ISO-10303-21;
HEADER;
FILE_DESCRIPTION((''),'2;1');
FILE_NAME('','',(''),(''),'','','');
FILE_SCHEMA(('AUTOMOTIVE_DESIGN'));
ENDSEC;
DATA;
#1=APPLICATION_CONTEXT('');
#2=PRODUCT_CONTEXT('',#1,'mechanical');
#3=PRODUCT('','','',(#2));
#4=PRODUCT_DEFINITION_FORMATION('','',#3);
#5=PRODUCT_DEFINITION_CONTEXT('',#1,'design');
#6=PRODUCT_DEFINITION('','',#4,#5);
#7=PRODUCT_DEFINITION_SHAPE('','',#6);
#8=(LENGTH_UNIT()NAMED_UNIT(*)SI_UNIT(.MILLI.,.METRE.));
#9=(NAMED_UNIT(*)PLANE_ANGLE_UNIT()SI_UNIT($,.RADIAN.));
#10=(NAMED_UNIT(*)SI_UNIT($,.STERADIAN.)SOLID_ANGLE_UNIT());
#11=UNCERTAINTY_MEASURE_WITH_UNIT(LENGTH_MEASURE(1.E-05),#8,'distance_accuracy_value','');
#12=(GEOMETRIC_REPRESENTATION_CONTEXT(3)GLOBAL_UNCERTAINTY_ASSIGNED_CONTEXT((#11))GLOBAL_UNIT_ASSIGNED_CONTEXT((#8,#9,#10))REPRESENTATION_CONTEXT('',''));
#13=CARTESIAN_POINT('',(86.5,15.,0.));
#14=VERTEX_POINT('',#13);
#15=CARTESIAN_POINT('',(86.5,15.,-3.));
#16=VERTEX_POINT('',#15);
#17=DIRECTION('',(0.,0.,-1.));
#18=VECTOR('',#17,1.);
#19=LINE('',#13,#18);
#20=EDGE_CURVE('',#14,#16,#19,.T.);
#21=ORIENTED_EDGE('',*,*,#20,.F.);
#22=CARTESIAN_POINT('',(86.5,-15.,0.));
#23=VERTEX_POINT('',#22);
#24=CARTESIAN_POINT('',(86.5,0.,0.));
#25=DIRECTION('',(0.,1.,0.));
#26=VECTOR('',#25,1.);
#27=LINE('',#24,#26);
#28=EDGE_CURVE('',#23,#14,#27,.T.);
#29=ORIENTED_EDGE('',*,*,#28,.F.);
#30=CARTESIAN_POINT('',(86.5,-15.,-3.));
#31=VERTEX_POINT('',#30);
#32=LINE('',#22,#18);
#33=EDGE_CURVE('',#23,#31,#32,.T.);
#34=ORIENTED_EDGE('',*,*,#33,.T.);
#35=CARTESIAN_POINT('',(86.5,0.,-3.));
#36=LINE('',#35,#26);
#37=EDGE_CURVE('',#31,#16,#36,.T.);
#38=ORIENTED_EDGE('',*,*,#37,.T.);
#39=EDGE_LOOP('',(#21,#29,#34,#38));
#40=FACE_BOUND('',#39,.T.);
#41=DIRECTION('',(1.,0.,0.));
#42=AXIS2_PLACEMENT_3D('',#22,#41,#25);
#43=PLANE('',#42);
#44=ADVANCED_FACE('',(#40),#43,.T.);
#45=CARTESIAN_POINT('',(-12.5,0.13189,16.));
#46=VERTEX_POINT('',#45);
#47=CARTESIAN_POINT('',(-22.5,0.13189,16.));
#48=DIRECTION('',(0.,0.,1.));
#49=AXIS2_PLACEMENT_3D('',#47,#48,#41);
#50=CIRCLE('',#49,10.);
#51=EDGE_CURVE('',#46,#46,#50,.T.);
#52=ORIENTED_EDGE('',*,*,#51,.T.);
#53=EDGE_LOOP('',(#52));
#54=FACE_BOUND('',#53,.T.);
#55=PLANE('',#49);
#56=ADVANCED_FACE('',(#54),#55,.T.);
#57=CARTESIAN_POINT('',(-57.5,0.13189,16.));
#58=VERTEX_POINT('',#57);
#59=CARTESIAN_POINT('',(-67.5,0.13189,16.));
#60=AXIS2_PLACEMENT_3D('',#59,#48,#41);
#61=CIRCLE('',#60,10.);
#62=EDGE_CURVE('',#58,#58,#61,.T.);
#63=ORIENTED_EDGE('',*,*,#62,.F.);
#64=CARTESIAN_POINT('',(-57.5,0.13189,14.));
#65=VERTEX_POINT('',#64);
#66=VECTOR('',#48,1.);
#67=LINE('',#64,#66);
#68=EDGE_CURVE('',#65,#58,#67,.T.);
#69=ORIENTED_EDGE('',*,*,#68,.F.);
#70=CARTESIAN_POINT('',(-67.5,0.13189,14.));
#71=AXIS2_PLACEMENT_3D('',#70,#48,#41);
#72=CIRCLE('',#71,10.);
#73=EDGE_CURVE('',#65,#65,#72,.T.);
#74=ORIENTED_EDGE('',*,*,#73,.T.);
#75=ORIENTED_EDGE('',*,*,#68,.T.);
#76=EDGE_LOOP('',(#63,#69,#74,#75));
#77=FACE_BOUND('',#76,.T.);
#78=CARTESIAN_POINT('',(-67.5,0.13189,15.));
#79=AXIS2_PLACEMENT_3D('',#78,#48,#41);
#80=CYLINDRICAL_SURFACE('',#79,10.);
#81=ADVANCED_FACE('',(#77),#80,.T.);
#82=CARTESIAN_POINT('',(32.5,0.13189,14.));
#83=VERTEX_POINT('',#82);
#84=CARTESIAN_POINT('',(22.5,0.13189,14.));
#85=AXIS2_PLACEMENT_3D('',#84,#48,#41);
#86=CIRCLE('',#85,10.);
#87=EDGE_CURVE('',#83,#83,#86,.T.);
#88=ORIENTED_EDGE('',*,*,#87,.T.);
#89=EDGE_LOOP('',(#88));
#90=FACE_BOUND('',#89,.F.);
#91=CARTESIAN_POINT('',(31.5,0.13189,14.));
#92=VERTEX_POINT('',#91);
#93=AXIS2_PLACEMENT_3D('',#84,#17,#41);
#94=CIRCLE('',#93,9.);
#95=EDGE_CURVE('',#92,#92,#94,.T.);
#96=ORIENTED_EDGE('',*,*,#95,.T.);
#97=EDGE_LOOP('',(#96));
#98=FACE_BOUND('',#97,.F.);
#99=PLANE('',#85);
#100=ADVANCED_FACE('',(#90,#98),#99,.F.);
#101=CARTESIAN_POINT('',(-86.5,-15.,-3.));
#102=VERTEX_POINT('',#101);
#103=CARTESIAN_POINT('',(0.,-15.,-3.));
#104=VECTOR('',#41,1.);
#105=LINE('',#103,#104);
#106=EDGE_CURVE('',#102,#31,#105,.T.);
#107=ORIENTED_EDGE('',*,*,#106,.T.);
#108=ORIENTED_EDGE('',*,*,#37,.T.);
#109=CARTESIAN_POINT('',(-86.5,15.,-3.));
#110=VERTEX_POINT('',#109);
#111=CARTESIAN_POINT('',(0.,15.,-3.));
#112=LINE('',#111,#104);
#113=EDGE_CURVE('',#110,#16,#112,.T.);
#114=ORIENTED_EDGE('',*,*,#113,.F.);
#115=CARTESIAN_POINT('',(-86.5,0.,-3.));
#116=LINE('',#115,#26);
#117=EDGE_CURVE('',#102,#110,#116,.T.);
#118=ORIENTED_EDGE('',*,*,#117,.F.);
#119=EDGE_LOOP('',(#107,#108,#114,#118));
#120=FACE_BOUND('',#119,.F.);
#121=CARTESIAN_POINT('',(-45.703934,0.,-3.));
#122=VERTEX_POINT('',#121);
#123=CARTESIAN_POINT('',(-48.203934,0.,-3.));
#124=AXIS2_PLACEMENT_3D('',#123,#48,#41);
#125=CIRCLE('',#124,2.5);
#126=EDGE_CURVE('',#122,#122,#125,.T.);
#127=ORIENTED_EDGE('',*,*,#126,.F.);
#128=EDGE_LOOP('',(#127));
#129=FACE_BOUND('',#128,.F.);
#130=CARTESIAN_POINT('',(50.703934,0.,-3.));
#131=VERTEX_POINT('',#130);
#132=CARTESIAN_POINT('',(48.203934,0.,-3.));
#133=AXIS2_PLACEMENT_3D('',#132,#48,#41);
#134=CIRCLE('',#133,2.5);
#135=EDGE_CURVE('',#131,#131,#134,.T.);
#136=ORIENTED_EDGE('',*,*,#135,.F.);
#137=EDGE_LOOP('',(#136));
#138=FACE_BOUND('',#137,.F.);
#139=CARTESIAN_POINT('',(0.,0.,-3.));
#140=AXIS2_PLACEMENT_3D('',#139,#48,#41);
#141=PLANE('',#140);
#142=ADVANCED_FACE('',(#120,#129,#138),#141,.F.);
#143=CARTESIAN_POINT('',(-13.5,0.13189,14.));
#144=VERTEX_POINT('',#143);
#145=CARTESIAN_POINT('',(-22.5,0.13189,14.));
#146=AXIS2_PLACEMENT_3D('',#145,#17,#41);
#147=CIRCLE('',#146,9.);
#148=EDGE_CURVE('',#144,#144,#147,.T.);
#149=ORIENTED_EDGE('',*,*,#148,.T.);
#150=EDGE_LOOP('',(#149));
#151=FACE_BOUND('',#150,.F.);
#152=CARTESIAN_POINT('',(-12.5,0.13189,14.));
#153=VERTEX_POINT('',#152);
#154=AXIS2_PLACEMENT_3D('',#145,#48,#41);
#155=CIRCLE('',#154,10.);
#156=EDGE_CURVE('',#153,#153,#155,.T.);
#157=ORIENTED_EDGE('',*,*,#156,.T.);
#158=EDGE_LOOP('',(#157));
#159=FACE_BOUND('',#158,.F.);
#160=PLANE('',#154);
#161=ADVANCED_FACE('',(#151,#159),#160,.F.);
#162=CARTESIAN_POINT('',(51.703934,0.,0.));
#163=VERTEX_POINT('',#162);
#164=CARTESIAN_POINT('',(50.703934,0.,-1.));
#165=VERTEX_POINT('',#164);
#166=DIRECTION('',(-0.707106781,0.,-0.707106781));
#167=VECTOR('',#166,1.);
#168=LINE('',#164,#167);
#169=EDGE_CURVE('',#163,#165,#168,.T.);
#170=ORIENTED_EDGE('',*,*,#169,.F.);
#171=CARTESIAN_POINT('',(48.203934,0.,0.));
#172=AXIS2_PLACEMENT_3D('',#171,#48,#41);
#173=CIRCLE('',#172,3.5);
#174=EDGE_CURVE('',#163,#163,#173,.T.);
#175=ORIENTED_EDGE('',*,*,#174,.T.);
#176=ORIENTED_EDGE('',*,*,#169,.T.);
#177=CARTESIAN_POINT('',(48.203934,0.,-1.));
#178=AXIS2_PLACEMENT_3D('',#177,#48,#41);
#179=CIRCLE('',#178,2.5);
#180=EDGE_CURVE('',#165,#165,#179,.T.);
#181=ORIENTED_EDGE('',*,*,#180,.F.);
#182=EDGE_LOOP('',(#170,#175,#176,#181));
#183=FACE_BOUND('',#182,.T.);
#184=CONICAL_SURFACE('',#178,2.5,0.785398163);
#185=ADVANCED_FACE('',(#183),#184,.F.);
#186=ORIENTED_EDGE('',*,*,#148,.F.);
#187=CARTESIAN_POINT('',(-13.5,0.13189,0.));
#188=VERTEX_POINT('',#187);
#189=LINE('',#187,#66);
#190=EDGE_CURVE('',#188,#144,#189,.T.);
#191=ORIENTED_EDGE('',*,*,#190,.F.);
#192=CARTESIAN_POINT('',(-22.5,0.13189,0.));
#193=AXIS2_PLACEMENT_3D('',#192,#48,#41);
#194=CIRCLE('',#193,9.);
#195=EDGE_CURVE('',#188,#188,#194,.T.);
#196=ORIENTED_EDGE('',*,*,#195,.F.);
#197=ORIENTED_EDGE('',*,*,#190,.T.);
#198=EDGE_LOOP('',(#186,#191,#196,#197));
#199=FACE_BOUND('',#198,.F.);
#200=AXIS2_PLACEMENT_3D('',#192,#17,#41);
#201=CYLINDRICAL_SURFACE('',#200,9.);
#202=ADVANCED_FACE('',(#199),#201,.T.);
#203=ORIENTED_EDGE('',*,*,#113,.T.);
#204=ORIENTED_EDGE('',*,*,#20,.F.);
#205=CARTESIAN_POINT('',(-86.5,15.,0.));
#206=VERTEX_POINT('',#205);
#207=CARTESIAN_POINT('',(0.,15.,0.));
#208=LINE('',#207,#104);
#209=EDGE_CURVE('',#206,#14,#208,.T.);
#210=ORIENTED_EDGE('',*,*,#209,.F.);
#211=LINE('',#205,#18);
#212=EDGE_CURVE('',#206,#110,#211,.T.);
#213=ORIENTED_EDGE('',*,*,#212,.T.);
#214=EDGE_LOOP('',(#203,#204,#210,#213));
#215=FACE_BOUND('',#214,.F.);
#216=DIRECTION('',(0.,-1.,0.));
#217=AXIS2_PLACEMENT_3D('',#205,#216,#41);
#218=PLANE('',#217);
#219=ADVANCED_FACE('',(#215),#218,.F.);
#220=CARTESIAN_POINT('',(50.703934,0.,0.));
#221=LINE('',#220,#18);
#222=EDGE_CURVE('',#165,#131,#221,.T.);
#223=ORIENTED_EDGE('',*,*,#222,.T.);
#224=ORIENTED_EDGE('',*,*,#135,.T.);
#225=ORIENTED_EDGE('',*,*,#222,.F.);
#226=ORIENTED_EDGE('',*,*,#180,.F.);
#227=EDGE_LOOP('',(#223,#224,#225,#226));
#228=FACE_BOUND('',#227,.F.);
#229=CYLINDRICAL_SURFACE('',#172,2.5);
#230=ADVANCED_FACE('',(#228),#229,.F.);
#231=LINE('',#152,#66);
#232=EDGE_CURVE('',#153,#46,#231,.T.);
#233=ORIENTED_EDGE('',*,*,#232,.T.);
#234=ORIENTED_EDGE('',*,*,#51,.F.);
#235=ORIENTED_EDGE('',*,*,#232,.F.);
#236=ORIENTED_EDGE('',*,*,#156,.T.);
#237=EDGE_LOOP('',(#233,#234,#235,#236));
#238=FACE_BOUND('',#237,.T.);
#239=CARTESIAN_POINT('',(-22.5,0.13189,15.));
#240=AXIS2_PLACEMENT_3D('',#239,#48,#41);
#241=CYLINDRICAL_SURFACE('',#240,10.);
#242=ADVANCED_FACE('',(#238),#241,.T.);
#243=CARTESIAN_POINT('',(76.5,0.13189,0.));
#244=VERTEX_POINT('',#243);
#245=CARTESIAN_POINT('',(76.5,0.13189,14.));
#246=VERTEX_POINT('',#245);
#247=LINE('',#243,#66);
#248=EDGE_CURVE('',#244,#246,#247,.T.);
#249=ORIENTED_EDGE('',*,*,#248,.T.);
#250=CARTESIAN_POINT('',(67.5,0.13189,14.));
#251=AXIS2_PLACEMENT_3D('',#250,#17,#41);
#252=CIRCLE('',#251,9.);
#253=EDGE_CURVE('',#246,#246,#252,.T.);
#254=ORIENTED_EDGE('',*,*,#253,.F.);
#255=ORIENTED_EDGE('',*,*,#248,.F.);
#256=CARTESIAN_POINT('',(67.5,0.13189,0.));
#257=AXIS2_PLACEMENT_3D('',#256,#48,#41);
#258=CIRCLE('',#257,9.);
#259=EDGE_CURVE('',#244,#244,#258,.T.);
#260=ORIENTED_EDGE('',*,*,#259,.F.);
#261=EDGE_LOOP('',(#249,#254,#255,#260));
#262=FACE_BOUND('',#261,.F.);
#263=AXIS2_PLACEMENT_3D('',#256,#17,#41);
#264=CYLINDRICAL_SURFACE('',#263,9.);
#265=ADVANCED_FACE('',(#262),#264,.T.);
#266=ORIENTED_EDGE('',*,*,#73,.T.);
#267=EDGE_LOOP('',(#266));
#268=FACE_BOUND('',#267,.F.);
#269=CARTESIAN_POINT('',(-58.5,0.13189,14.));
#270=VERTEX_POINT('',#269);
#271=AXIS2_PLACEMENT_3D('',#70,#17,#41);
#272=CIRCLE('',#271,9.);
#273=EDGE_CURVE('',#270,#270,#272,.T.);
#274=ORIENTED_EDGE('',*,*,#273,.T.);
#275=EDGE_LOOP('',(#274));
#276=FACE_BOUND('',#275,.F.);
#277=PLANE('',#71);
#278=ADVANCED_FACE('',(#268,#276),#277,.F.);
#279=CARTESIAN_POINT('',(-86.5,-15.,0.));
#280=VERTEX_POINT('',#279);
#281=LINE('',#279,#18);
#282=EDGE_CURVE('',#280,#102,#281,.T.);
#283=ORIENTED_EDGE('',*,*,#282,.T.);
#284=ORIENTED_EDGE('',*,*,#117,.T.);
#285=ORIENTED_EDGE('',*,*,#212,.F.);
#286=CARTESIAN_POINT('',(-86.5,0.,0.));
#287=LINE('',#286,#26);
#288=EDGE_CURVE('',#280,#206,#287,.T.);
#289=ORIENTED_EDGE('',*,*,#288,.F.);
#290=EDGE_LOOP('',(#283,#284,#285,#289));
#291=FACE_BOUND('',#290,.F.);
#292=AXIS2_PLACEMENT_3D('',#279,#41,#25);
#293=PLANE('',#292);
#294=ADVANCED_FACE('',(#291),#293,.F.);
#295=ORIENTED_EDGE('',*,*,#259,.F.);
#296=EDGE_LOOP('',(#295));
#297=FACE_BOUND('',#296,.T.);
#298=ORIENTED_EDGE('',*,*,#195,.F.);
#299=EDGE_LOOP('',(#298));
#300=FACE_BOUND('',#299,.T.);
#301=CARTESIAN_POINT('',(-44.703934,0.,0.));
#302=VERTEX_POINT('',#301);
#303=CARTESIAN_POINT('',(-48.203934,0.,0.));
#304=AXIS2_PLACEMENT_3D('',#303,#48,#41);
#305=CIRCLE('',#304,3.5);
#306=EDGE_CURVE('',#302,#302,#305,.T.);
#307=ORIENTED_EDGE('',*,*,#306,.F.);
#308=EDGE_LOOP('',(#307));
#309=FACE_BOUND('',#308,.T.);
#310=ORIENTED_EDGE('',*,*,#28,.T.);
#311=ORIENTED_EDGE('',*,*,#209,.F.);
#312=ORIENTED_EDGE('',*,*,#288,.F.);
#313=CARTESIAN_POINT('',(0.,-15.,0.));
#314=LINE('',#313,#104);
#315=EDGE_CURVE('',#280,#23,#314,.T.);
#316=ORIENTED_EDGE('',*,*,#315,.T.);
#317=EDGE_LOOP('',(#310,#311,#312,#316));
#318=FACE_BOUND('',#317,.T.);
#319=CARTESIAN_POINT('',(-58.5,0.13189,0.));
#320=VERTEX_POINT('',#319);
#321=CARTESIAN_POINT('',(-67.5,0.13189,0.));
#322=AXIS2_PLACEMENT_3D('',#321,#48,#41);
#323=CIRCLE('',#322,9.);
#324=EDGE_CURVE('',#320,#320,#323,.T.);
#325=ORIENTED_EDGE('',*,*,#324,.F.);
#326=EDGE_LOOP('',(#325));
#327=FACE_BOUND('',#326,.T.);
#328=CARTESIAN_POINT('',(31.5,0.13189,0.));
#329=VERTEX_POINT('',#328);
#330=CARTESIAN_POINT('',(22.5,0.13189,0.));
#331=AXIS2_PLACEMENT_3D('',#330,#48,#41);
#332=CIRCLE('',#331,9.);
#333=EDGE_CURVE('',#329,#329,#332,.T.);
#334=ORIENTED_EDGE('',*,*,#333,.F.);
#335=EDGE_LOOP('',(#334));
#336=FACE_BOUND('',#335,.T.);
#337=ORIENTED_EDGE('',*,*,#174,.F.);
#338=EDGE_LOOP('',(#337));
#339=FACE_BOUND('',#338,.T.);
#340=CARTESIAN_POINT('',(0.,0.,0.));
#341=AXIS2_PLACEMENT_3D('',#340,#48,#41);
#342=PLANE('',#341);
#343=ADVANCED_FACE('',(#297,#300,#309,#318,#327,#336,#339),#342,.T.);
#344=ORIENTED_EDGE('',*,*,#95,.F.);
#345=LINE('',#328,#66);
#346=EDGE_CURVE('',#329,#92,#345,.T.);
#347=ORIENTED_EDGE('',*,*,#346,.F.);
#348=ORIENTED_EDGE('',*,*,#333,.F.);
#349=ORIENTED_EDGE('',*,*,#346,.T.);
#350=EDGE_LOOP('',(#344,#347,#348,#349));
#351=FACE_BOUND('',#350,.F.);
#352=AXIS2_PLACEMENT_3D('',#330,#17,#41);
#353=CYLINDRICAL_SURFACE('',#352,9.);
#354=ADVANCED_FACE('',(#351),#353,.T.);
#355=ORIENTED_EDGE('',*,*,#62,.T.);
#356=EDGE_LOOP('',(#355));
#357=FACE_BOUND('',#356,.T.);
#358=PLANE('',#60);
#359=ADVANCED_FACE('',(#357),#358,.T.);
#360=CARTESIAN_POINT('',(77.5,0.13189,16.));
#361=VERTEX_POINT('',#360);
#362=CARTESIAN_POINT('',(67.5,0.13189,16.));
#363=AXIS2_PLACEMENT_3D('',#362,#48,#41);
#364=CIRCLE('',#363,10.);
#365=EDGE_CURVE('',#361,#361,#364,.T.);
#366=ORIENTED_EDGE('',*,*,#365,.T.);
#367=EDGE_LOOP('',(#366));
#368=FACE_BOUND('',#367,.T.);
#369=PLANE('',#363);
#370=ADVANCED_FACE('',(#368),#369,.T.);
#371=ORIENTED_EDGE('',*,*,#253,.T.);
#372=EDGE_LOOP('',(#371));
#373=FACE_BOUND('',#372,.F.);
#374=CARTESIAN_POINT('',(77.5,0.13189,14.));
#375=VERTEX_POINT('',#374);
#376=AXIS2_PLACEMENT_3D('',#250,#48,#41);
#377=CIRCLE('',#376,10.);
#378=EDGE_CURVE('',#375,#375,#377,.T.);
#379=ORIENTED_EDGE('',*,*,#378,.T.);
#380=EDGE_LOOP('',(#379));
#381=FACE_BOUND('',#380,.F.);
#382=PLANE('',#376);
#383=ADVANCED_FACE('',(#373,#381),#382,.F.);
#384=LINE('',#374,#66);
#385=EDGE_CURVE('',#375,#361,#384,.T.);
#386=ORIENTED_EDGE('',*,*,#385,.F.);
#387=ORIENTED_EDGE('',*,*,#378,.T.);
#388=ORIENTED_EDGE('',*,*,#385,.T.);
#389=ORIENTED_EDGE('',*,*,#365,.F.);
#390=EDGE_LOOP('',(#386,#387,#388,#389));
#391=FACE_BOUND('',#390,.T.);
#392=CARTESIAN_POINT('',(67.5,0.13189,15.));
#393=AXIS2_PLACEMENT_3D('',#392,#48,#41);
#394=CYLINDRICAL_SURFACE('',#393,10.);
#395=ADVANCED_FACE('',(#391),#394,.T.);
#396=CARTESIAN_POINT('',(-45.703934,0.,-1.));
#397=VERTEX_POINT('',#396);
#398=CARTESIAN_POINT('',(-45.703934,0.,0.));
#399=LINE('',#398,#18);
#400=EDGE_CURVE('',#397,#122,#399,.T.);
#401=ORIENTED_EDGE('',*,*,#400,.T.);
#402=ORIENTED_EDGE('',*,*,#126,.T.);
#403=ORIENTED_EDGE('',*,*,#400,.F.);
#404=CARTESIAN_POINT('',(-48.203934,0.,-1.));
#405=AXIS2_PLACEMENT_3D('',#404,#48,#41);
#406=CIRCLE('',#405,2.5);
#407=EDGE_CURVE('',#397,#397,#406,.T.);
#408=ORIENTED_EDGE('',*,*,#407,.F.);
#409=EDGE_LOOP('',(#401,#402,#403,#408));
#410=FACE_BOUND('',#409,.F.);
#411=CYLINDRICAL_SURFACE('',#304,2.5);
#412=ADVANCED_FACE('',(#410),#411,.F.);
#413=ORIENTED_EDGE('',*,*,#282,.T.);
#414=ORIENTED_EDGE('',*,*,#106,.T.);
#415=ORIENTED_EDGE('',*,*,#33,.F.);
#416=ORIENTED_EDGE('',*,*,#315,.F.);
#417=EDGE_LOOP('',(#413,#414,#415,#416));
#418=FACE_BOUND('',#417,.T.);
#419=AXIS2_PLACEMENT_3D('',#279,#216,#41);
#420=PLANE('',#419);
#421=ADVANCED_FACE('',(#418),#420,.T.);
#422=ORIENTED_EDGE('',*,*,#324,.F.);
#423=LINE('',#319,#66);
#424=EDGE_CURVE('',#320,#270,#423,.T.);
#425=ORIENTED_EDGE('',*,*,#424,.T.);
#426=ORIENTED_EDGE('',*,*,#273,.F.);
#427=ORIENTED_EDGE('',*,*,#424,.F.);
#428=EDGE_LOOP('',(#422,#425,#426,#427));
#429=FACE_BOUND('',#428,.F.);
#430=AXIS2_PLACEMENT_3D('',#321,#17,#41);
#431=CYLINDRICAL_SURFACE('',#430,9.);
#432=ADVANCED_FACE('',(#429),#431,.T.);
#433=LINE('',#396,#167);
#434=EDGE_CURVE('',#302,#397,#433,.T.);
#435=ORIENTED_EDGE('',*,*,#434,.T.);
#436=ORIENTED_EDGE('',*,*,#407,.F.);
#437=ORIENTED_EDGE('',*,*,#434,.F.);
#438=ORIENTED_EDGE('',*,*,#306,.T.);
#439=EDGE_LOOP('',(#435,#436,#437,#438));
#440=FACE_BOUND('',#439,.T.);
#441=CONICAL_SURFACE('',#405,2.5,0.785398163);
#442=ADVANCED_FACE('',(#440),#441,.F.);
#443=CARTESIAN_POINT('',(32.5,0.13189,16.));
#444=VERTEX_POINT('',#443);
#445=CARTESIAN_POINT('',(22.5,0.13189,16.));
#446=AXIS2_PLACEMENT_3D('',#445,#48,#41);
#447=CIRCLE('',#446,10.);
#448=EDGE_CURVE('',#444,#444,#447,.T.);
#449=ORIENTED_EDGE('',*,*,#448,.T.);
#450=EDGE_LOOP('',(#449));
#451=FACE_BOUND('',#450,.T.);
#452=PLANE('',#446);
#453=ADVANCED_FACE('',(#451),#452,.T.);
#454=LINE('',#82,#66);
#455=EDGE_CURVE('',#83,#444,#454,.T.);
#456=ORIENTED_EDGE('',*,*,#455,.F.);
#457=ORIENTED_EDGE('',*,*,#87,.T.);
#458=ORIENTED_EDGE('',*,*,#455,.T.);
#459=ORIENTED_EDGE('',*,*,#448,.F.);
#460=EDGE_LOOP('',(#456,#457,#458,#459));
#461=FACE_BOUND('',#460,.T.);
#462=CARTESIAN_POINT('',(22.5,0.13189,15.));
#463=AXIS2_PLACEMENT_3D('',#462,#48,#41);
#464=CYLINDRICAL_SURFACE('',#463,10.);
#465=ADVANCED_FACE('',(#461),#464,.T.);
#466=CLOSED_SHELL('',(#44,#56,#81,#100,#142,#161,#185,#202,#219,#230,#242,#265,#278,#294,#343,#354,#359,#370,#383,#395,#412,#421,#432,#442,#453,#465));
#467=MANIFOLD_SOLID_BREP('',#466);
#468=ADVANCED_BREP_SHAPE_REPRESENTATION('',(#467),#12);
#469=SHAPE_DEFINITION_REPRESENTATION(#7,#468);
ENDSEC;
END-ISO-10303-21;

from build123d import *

# Parameters (mm, degrees)
F0_W     = 173
F0_H     = 30
F1_DEPTH = 3
F2_R     = 9
F3_DEPTH = 15
F4_R     = 2.5
F5_DEPTH = 25
F6_SIZE  = 1
F7_R     = 10
F7_R_2   = 9
F8_DEPTH = 1


with BuildPart() as f1:
    # F0 (on Top) → F1 (new body)
    with BuildSketch(Plane.XY):
        Rectangle(F0_W, F0_H)
    extrude(amount=-F1_DEPTH)

    # F2 (on face) → F3 (join)
    with BuildSketch(Plane.XY):
        with Locations((-67.5, 0.1318904841)):
            Circle(F2_R)
        with Locations((-22.5, 0.1318904841)):
            Circle(F2_R)
        with Locations((22.5, 0.1318904841)):
            Circle(F2_R)
        with Locations((67.5, 0.1318904841)):
            Circle(F2_R)
    extrude(amount=F3_DEPTH)

    # F4 (on face) → F5 (cut)
    with BuildSketch(Plane.XY):
        with Locations((-48.203933984, 0)):
            Circle(F4_R)
        with Locations((48.203933984, 0)):
            Circle(F4_R)
    extrude(amount=-F5_DEPTH, mode=Mode.SUBTRACT)

    # F6
    f6_edges = [f1.edges().sort_by_distance(p)[0] for p in [
        (-50.703934, 0, 0),
        (45.703934, 0, 0),
    ]]
    chamfer(f6_edges, length=F6_SIZE)

    # F7 (on face) → F8 (join, symmetric)
    with BuildSketch(Plane.XY.offset(15)):
        with Locations((-67.5, 0.1318904841)):
            Circle(F7_R)
        with Locations((-67.5, 0.1318904841)):
            Circle(F7_R_2, mode=Mode.SUBTRACT)
        with Locations((-22.5, 0.1318904841)):
            Circle(F7_R)
        with Locations((22.5, 0.1318904841)):
            Circle(F7_R)
        with Locations((67.5, 0.1318904841)):
            Circle(F7_R)
        with Locations((-67.5, 0.1318904841)):
            Circle(F7_R_2)
    extrude(amount=F8_DEPTH, both=True)


solid = f1.part
